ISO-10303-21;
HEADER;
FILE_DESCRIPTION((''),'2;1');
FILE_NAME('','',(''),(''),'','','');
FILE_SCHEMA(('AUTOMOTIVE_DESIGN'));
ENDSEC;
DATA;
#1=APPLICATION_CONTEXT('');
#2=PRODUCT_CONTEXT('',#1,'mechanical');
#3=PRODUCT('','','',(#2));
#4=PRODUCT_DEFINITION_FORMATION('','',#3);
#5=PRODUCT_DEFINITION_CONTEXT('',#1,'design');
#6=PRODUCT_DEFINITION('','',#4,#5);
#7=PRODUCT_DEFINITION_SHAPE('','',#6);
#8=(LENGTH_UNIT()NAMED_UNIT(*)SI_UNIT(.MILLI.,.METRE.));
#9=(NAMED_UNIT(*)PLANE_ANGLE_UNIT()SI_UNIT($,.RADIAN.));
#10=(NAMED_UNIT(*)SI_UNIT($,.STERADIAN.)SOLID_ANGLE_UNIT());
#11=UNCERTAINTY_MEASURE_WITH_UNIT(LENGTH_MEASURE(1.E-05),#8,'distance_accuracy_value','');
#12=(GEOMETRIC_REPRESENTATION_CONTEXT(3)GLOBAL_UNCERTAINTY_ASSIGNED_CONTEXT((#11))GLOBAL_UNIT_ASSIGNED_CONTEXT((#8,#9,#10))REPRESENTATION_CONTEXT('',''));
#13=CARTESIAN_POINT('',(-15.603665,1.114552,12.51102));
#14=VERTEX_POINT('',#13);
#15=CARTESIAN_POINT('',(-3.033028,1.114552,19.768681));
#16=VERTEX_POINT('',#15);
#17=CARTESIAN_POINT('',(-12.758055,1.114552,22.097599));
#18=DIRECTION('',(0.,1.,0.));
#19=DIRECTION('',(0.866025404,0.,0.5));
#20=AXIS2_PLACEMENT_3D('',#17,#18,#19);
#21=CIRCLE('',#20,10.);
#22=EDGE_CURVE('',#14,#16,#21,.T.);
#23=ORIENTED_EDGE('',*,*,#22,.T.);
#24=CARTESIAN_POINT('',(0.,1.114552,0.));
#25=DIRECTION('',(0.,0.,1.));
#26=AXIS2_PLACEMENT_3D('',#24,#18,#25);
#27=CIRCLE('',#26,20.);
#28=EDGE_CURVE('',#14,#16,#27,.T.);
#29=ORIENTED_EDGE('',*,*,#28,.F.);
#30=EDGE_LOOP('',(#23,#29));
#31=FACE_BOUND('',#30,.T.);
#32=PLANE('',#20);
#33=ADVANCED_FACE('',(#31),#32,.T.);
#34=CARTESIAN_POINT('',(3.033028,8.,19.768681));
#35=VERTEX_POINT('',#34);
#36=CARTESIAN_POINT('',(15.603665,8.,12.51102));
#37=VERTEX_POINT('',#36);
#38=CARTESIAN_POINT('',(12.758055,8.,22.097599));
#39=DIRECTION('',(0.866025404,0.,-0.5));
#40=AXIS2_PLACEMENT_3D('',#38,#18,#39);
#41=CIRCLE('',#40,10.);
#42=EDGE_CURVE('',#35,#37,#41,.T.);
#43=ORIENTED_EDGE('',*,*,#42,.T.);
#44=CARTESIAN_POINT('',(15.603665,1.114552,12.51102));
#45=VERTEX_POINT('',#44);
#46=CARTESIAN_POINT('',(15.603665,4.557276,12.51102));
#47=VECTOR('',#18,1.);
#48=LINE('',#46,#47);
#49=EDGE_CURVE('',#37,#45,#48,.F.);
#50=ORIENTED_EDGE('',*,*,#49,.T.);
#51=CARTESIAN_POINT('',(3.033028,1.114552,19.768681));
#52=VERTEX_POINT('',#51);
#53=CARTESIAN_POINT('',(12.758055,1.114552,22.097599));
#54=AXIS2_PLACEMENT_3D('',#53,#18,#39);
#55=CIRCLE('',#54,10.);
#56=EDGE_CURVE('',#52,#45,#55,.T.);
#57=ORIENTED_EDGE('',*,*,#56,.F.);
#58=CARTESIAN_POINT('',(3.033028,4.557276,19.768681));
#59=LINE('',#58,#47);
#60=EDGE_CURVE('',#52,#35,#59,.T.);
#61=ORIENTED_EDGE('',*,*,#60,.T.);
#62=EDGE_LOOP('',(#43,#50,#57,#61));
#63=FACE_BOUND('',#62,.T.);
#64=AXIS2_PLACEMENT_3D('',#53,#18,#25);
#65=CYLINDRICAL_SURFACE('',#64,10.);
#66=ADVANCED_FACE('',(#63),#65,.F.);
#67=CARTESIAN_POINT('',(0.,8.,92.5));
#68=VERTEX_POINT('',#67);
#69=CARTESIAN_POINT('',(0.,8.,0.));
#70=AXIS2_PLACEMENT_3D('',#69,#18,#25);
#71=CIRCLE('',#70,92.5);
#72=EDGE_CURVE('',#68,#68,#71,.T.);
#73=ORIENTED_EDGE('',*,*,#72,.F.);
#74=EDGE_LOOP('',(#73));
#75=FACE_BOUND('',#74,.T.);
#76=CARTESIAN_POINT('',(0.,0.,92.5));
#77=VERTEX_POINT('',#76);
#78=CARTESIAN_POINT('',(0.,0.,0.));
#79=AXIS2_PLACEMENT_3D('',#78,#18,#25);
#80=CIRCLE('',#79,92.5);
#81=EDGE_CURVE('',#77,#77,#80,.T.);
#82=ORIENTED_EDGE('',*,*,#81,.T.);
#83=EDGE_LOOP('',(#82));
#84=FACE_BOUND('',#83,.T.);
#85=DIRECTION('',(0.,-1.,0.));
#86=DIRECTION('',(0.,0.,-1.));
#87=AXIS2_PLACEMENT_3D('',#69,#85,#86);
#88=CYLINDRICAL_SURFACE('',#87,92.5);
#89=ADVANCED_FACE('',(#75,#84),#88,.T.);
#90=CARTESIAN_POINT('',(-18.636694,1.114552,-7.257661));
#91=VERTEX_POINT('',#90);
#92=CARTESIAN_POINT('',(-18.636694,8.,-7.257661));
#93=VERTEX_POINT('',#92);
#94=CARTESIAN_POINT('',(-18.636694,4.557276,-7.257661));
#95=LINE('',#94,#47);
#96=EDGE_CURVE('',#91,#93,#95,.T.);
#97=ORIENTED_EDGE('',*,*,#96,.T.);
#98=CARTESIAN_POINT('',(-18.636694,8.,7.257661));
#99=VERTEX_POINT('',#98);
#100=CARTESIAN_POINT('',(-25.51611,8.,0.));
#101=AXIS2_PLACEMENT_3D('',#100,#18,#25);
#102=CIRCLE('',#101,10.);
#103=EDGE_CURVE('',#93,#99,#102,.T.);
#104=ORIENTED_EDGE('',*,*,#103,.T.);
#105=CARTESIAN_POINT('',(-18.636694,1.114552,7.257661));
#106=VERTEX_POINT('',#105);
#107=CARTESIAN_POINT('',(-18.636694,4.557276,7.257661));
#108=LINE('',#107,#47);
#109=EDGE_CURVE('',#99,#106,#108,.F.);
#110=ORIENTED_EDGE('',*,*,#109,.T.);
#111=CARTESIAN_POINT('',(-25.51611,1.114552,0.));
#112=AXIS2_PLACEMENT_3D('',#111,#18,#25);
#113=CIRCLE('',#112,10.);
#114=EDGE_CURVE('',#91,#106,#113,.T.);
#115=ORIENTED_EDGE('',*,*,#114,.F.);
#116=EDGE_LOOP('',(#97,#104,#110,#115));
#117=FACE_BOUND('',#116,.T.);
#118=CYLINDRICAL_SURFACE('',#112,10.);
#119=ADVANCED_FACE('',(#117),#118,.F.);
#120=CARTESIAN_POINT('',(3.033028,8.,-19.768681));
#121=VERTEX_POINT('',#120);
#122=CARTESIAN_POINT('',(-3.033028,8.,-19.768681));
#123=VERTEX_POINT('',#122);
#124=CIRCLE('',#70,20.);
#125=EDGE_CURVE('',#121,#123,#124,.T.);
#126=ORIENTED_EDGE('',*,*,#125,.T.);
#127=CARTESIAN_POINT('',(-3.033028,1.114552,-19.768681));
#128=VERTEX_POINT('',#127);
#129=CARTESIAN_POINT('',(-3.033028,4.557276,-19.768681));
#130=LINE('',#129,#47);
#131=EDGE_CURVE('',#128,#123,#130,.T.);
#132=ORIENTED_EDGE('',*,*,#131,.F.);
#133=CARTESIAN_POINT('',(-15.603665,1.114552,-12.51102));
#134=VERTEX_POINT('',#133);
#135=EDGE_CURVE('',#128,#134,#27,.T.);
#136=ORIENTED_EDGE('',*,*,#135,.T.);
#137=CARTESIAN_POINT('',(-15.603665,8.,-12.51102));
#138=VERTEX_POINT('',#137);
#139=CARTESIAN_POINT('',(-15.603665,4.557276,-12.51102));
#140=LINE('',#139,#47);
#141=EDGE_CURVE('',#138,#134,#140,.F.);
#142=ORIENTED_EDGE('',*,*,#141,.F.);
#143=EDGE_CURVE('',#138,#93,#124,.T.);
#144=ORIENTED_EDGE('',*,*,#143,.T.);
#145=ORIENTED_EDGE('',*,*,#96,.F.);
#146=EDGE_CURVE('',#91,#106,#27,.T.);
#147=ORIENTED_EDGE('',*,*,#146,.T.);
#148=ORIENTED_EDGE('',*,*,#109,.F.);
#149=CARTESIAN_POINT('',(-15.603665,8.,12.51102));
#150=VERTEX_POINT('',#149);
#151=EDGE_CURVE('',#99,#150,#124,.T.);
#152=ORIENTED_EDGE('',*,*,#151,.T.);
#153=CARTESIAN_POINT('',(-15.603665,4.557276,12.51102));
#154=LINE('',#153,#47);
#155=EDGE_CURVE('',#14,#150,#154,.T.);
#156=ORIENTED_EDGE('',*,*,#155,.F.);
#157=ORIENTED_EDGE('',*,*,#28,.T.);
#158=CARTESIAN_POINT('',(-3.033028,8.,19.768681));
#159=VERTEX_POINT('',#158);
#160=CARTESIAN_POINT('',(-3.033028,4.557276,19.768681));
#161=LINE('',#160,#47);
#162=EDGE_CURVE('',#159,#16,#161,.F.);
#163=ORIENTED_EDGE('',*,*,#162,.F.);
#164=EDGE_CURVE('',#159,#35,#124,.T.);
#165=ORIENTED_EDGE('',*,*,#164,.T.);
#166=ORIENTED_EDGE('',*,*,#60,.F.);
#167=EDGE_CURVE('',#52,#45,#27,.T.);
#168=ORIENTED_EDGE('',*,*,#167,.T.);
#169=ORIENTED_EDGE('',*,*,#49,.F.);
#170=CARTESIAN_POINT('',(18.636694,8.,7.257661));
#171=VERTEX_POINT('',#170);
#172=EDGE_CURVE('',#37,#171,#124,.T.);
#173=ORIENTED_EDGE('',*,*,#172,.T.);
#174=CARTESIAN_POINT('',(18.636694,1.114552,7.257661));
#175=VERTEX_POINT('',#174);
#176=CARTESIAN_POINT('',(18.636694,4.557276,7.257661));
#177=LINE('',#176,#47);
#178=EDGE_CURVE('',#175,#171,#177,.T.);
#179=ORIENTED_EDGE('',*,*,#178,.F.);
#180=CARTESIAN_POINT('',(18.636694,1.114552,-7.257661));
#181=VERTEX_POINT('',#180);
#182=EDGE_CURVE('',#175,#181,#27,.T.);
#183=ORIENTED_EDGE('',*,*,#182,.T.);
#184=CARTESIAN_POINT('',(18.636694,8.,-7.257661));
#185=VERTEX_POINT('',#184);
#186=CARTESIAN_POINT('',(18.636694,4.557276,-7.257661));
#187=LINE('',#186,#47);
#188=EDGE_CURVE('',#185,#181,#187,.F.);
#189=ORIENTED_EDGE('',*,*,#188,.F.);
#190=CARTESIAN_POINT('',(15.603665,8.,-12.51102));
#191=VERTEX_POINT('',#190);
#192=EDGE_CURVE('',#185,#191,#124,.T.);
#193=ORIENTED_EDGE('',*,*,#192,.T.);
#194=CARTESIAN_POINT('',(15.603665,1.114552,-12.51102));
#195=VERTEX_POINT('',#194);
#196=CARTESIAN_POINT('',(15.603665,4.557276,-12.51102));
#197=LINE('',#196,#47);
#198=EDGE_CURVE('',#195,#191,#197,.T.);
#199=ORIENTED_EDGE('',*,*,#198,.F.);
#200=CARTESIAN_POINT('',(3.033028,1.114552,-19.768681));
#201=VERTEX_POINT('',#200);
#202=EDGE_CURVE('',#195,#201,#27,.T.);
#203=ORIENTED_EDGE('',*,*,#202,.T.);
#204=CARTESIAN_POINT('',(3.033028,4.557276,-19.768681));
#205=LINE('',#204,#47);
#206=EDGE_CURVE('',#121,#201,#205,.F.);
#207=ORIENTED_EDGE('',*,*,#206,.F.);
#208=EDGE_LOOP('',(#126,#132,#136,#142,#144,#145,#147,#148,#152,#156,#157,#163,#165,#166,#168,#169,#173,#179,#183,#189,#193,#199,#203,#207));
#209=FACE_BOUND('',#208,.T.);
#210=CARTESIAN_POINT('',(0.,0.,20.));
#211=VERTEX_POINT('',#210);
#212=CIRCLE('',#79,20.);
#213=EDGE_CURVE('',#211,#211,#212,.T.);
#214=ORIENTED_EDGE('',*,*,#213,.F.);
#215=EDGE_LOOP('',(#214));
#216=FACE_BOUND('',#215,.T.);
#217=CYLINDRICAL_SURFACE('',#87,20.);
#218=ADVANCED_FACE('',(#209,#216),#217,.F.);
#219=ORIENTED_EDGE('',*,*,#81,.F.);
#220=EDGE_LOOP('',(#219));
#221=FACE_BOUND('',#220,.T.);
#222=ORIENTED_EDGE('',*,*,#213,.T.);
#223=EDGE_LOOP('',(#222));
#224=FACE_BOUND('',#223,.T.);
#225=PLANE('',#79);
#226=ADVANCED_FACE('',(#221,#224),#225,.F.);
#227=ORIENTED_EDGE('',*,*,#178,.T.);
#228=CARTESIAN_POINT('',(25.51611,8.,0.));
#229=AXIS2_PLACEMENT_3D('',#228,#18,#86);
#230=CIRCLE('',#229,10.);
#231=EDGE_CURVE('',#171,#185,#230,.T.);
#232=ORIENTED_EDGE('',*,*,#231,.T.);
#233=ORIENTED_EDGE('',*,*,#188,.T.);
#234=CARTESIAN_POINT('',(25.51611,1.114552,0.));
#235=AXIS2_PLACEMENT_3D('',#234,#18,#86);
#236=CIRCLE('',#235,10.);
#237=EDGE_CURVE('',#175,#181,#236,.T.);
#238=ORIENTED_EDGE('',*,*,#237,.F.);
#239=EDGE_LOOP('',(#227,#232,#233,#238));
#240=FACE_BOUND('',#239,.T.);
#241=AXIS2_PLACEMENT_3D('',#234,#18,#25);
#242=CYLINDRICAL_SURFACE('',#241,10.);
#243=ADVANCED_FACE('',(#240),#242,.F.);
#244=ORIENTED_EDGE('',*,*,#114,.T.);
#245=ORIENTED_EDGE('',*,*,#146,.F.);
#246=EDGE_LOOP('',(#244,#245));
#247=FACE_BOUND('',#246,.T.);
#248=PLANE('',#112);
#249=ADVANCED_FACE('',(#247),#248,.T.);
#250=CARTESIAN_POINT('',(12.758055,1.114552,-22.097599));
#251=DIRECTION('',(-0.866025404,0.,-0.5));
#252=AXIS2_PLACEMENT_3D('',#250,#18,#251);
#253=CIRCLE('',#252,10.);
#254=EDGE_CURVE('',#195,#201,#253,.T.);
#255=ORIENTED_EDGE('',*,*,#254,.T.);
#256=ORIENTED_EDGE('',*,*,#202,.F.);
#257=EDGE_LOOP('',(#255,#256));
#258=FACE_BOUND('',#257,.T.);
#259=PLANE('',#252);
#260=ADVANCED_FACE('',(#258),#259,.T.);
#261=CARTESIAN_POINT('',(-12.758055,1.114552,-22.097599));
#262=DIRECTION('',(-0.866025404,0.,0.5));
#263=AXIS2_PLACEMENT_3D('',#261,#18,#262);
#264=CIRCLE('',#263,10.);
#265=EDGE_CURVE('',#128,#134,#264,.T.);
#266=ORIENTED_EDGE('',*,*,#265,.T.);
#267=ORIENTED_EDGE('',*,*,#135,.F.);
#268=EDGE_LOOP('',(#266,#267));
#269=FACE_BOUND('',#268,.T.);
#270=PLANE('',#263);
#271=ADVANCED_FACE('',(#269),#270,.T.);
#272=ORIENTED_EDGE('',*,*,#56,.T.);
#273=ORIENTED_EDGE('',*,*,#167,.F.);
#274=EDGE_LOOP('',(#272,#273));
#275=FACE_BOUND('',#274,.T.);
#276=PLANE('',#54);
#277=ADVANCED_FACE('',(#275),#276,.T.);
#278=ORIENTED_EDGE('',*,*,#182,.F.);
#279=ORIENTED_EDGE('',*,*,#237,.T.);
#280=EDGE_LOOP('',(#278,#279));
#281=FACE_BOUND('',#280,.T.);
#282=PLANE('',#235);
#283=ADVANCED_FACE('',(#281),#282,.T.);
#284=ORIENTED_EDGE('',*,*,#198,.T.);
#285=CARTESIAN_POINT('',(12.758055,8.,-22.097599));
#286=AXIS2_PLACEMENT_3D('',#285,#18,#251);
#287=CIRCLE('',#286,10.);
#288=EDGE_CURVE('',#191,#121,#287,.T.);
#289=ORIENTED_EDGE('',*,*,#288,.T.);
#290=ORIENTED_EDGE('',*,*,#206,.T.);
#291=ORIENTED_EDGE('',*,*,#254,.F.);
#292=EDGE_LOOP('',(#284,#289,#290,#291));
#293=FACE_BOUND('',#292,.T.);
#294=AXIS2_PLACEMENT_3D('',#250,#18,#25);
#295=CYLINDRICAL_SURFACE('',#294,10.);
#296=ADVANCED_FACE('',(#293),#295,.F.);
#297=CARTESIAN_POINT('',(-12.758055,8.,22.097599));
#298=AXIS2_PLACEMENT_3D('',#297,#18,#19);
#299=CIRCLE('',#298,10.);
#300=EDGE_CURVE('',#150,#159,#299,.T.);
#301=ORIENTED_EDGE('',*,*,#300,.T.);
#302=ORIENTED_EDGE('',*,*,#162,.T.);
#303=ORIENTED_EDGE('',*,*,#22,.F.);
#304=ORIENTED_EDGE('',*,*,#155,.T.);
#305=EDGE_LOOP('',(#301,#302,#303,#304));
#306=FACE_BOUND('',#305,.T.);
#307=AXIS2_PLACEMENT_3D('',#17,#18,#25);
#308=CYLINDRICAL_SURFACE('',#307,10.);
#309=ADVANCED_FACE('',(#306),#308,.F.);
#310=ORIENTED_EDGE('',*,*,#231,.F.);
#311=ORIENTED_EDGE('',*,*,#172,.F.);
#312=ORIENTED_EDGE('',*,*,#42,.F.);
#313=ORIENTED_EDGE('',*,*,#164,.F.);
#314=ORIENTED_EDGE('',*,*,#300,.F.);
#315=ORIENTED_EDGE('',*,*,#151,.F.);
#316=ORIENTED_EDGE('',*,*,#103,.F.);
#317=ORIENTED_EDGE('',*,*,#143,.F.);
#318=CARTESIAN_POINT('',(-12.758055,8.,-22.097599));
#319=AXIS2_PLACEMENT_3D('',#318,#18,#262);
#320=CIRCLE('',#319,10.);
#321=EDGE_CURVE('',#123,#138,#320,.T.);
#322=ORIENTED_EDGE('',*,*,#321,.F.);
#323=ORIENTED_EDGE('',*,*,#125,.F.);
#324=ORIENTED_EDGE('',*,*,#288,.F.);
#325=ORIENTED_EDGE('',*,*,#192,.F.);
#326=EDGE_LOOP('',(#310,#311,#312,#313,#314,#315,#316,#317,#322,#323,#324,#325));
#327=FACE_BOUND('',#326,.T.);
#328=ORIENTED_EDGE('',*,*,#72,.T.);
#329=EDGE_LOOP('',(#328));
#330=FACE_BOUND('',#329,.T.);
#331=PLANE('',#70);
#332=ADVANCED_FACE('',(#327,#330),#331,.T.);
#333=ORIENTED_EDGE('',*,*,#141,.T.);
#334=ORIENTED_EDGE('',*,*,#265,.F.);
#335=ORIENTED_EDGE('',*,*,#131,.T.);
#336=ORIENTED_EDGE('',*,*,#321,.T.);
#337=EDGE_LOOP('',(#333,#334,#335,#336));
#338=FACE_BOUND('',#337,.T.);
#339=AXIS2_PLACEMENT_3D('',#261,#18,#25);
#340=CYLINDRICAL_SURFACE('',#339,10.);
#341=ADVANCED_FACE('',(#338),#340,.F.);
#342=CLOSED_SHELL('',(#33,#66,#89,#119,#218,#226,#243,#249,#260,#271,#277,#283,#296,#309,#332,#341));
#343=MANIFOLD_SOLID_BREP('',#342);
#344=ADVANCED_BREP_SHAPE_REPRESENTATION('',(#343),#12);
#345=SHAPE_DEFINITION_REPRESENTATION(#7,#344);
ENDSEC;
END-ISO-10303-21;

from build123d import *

# Parameters (mm, degrees)
SKETCH1_R           = 92.5
BOSS_EXTRUDE1_DEPTH = 8
SKETCH2_R           = 20
CUT_EXTRUDE1_DEPTH  = 132.059146953
SKETCH3_R           = 10
CUT_EXTRUDE2_DEPTH  = 6.885447698
CIRPATTERN1_COUNT   = 6


with BuildPart() as part:
    # Sketch1 → Boss-Extrude1 (new body)
    with BuildSketch(Plane(origin=(0, 0, 0), x_dir=(1, 0, 0), z_dir=(0, 1, 0))):
        Circle(SKETCH1_R)
    extrude(amount=BOSS_EXTRUDE1_DEPTH)

    # Sketch2 → Cut-Extrude1 (cut, through all)
    with BuildSketch(Plane(origin=(0, 0, 0), x_dir=(1, 0, 0), z_dir=(0, 1, 0))):
        Circle(SKETCH2_R)
    extrude(amount=CUT_EXTRUDE1_DEPTH, mode=Mode.SUBTRACT)

    # Sketch3 → Cut-Extrude2 (cut)
    with BuildSketch(Plane(origin=(0, 8, 0), x_dir=(1, 0, 0), z_dir=(0, 1, 0))):
        with Locations((-25.516109786, 0)):
            Circle(SKETCH3_R)
    cut_extrude2 = extrude(amount=-CUT_EXTRUDE2_DEPTH, mode=Mode.SUBTRACT)

    # CirPattern1: Cut-Extrude2 ×6 about axis
    cirpattern1_axis = Axis((0, 0, 0), (0, 1, 0))
    for i in range(1, CIRPATTERN1_COUNT):
        add(cut_extrude2.rotate(cirpattern1_axis, i * 360 / CIRPATTERN1_COUNT), mode=Mode.SUBTRACT)


solid = part.part
